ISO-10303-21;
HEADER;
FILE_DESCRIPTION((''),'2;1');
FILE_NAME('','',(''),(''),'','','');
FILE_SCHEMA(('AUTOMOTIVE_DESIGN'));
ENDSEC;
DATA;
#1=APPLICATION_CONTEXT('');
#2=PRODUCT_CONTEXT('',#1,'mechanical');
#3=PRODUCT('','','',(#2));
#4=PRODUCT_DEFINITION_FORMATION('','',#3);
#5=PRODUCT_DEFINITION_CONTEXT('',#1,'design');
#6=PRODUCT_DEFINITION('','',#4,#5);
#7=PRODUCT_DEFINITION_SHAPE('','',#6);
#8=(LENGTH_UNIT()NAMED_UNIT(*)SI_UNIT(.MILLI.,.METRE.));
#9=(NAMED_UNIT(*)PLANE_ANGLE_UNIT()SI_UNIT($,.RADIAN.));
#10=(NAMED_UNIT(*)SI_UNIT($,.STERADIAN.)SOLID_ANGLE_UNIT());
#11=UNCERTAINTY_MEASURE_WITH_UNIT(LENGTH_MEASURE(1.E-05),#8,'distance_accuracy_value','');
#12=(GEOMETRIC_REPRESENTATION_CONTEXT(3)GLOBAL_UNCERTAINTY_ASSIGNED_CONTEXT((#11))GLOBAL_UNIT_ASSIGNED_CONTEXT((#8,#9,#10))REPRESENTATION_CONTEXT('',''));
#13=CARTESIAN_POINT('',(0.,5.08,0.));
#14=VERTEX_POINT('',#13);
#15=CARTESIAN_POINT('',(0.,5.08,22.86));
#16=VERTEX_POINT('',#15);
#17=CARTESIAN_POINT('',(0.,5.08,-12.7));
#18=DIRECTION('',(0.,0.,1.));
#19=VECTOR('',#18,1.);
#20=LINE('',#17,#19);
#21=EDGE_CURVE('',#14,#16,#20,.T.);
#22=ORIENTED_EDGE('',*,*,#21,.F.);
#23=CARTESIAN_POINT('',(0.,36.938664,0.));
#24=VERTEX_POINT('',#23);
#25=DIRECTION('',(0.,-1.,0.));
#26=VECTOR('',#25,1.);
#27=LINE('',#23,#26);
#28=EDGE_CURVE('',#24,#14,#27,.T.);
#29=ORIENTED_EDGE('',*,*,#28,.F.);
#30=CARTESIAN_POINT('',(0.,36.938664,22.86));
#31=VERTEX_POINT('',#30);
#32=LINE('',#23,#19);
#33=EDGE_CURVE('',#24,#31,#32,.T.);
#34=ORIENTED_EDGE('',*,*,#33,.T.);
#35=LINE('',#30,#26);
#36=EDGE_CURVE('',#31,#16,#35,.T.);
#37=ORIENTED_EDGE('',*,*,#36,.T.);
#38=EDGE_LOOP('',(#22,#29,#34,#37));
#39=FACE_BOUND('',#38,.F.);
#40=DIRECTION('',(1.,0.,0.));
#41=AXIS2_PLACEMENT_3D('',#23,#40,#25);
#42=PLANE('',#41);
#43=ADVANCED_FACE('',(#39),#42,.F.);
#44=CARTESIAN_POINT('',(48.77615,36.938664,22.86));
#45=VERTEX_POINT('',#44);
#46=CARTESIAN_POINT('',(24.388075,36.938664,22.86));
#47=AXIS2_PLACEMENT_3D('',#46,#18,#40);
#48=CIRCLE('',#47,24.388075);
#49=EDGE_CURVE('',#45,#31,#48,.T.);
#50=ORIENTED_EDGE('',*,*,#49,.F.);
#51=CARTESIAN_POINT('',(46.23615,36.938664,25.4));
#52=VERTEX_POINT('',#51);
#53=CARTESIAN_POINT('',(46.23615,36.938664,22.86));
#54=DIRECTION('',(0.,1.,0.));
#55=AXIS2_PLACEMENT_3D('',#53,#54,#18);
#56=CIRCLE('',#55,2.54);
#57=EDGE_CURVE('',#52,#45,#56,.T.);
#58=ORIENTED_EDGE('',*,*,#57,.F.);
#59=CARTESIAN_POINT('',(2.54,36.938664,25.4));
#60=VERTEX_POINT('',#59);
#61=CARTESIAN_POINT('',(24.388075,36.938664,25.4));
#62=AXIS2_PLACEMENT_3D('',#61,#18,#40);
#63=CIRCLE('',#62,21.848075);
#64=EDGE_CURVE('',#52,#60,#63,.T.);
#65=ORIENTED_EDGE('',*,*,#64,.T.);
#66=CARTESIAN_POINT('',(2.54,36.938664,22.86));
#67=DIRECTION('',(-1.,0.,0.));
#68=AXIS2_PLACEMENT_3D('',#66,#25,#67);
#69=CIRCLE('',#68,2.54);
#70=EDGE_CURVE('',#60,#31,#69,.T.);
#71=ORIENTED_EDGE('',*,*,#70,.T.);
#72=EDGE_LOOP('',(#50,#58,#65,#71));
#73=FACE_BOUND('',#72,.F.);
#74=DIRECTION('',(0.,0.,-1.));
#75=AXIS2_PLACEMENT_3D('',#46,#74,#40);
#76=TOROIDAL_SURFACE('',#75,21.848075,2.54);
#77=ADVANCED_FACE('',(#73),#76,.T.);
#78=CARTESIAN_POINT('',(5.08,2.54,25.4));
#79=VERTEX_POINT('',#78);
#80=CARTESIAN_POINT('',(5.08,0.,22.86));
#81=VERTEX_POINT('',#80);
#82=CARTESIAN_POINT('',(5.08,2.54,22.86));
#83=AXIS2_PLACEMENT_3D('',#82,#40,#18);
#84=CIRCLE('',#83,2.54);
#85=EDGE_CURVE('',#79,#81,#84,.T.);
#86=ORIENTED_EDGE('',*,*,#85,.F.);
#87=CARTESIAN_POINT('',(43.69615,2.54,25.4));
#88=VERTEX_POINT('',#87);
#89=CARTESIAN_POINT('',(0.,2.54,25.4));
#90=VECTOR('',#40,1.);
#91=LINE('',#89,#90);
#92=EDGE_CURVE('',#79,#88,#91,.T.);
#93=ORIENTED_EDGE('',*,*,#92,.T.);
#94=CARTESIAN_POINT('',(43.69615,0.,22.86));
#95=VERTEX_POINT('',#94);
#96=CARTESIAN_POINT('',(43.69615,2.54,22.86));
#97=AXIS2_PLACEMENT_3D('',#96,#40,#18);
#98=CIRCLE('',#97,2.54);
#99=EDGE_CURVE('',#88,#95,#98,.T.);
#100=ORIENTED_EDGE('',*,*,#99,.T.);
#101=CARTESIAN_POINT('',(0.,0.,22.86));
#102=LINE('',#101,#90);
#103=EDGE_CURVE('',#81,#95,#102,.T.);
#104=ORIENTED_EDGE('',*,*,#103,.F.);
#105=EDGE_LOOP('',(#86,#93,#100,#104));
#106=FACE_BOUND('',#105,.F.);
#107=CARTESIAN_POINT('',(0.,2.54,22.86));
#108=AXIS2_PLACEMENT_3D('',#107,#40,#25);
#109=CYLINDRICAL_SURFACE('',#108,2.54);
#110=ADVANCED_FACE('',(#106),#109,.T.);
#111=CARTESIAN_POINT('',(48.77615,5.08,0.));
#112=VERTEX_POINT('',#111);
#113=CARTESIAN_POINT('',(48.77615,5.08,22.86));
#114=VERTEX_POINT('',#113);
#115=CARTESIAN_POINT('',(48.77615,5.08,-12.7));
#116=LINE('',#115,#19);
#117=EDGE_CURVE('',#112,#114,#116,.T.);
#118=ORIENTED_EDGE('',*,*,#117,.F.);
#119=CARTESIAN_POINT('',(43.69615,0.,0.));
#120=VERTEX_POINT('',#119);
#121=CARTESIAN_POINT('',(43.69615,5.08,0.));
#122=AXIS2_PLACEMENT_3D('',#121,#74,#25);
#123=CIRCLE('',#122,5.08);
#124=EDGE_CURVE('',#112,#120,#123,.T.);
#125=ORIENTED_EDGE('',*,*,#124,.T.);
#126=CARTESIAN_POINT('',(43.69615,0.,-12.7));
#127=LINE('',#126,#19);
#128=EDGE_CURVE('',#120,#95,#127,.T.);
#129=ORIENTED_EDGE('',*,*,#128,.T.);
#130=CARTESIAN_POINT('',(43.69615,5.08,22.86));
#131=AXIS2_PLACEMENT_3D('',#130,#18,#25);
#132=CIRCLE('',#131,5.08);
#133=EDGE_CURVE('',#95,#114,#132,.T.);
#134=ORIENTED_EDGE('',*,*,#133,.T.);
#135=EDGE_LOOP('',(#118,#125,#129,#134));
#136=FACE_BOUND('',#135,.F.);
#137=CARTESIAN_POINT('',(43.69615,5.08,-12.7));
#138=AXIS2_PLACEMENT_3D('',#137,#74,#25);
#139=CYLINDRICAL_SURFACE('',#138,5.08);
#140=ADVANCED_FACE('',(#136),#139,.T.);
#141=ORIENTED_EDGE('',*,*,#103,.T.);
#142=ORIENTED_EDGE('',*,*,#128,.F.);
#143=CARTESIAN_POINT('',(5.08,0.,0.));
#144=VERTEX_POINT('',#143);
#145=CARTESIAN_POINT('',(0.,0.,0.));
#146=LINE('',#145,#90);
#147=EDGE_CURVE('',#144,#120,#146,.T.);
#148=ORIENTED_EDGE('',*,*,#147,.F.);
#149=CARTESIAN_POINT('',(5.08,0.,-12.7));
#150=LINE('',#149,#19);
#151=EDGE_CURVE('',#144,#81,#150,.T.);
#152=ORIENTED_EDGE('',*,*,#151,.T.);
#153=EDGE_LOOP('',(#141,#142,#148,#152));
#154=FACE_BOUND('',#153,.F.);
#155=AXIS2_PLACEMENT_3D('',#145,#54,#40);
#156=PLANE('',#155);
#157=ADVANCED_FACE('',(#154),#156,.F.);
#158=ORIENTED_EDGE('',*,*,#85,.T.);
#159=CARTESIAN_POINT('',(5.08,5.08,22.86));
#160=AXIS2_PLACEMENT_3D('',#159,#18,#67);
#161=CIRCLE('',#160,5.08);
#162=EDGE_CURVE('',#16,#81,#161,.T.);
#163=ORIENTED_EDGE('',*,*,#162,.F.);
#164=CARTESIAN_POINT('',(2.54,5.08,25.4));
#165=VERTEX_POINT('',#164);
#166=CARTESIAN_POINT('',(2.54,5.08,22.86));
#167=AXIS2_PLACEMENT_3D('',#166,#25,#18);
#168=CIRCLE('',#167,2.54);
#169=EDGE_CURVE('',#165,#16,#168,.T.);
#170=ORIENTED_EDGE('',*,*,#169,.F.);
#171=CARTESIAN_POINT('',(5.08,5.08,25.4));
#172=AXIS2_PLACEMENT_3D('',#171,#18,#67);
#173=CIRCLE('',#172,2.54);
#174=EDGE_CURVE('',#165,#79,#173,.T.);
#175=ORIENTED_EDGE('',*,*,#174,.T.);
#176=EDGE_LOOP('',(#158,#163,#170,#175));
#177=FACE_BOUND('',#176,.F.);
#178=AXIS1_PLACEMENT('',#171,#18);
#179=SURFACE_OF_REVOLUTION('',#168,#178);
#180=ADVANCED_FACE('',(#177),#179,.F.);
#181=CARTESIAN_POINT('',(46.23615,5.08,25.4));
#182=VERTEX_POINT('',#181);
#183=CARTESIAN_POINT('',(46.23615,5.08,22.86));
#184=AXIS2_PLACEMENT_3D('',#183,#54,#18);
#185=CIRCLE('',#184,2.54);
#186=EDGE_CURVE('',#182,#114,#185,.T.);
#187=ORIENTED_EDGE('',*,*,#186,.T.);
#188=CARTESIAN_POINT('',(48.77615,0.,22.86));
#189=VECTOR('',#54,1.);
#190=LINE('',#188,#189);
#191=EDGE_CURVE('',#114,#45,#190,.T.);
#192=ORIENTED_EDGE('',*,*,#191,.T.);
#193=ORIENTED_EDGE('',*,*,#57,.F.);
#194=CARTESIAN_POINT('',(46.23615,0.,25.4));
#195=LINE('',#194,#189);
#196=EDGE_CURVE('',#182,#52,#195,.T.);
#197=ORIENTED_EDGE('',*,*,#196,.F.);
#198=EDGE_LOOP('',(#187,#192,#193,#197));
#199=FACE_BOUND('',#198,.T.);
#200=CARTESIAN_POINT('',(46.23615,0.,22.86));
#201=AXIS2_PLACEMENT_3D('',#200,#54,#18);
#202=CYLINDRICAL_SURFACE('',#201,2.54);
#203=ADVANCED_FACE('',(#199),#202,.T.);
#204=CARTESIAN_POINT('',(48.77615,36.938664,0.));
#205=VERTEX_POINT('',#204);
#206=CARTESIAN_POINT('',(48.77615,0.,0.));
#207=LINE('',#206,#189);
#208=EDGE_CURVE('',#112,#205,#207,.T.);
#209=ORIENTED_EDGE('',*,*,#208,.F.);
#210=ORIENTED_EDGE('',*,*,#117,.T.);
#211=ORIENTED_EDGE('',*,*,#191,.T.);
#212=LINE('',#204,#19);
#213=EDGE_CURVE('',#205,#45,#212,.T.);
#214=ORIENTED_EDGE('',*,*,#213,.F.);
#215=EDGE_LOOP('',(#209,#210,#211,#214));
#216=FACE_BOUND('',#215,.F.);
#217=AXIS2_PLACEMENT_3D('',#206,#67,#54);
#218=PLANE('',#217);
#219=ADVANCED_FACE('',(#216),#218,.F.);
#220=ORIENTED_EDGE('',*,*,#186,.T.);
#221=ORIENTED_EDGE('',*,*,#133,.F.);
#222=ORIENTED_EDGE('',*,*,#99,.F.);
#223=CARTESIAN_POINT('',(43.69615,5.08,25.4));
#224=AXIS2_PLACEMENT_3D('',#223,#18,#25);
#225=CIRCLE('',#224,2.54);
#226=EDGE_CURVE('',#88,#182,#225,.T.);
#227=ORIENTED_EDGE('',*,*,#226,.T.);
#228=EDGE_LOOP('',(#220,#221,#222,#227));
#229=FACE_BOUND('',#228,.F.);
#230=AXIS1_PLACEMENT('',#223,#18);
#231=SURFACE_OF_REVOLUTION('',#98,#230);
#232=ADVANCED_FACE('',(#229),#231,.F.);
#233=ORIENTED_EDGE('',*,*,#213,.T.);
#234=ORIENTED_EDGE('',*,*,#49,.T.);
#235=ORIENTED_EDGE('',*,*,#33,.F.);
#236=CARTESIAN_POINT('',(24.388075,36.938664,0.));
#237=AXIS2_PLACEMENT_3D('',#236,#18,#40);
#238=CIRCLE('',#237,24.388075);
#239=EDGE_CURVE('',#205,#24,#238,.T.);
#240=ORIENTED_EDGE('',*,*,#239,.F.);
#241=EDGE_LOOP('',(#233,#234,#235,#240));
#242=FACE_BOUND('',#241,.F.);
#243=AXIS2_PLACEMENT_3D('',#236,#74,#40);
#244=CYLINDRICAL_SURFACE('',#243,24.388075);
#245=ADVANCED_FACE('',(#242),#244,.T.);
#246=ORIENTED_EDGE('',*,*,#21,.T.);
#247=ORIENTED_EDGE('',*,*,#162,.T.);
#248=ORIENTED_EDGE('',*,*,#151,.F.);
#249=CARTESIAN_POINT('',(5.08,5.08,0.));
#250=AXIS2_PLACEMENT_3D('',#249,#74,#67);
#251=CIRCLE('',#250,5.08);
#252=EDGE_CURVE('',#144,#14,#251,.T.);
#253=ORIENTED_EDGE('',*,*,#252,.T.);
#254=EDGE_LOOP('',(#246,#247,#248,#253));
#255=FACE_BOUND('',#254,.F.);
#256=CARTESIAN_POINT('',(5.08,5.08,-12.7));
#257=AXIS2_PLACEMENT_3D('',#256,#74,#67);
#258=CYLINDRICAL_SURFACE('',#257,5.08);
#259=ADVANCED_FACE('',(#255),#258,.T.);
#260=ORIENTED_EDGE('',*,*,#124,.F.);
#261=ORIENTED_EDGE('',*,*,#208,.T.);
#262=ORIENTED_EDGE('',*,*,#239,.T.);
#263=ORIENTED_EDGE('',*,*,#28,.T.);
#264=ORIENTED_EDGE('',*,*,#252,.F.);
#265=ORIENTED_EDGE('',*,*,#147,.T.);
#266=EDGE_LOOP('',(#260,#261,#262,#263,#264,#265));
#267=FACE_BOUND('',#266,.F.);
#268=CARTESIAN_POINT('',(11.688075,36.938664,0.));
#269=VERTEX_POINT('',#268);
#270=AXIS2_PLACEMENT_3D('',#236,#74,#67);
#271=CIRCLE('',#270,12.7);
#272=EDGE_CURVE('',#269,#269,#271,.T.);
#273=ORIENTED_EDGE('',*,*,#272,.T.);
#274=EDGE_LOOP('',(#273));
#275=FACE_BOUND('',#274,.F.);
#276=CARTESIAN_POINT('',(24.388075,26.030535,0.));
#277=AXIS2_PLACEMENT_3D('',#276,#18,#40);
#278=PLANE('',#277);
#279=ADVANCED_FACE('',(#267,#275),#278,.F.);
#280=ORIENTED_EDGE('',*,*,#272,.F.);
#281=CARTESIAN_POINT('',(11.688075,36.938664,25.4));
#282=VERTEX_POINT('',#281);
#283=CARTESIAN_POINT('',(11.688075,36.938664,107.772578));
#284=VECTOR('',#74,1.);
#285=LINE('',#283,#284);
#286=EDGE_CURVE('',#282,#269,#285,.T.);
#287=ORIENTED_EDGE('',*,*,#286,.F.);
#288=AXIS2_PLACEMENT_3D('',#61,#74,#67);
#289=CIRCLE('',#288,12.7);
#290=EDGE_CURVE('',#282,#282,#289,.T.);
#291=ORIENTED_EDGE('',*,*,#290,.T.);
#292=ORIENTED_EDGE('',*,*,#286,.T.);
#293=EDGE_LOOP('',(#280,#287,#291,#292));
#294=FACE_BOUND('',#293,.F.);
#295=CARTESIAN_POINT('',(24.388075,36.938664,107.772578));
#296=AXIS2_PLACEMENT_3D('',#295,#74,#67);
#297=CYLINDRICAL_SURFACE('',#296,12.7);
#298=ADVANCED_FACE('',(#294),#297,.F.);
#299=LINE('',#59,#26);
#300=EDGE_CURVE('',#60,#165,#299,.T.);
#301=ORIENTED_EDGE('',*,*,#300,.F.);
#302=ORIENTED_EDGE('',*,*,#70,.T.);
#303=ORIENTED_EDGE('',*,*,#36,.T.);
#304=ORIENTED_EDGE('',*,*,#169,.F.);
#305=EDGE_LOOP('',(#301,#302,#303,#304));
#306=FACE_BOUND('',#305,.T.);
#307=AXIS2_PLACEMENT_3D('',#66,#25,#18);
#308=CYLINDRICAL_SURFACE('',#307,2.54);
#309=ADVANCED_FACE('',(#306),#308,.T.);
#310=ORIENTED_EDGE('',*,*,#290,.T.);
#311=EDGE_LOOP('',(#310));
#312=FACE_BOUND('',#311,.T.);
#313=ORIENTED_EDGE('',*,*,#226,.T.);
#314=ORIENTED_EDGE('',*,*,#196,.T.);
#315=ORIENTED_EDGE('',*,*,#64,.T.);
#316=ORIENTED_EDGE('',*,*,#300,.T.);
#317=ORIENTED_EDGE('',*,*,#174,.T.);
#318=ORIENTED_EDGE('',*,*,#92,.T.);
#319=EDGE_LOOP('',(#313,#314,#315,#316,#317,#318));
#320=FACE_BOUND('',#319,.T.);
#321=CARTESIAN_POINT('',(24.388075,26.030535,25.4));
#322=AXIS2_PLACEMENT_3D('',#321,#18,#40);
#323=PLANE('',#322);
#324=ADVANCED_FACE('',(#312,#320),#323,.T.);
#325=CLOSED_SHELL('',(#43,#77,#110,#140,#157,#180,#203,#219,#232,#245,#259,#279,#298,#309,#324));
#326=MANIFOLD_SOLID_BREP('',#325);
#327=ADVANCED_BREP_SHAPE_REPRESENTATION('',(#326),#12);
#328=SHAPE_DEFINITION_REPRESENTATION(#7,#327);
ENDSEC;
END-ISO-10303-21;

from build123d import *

# Parameters (mm, degrees)
F1_DEPTH    = 25.4
F3_D        = 25.4
F4_R        = 2.54
F5_T1_DEPTH = 38.1
F5_T4_ANGLE = 90
F5_T6_ANGLE = 90


# Not quite as in the source:
# - a fillet or chamfer that OpenCascade refuses, or shapes differently, is made with other operations: its cross-section is extruded or revolved along the edge and cut away or added


with BuildPart() as f1:
    # F0 (on Top) → F1 (new body)
    with BuildSketch(Plane.XY):
        with BuildLine():
            Line((0, 36.9386635721), (0, 0))
            Line((0, 0), (48.7761497498, 0))
            Line((48.7761497498, 0), (48.7761497498, 36.9386635721))
            ThreePointArc((48.7761497498, 36.9386635721), (24.3880748749, 61.326738447), (0, 36.9386635721))
        make_face()
    extrude(amount=F1_DEPTH)

    # F3 (through all)
    with Locations(Plane.XY.offset(25.4)):
        with Locations((24.3880748749, 36.9386635721)):
            Hole(F3_D / 2)

    # F4
    f4_edges = [f1.edges().sort_by_distance(p)[0] for p in [
        (24.388075, 0, 25.4),
        (48.77615, 18.469332, 25.4),
    ]]
    fillet(f4_edges, radius=F4_R)

    # F5: fillet of radius 5.08 on 2 edges, made by hand

    # F5_s2 → F5_t1 (cut)
    with BuildSketch(Plane.XY.offset(-12.7)):
        with BuildLine():
            ThreePointArc((43.6961497498, 0), (47.2882521982, 1.4878975516), (48.7761497498, 5.08))
            Line((48.7761497498, 5.08), (48.7761497498, 0))
            Line((48.7761497498, 0), (43.6961497498, 0))
        make_face()
        with BuildLine():
            ThreePointArc((0, 5.08), (1.4878975516, 1.4878975516), (5.08, 0))
            Line((5.08, 0), (0, 0))
            Line((0, 0), (0, 5.08))
        make_face()
    extrude(amount=F5_T1_DEPTH, mode=Mode.SUBTRACT)

    # F5_s3 → F5_t4 (revolve, cut)
    with BuildSketch(Plane.XZ.offset(-5.08)):
        with BuildLine():
            ThreePointArc((2.54, 25.4), (0.7439487758, 24.6560512242), (0, 22.86))
            Line((0, 22.86), (0, 25.4))
            Line((0, 25.4), (2.54, 25.4))
        make_face()
    revolve(axis=Axis((5.08, 5.08, 25.4), (0, 0, 1)), revolution_arc=F5_T4_ANGLE, mode=Mode.SUBTRACT)

    # F5_s5 → F5_t6 (revolve, cut)
    with BuildSketch(Plane.YZ.offset(43.6961497498)):
        with BuildLine():
            ThreePointArc((2.54, 25.4), (0.7439487758, 24.6560512242), (0, 22.86))
            Line((0, 22.86), (0, 25.4))
            Line((0, 25.4), (2.54, 25.4))
        make_face()
    revolve(axis=Axis((43.6961497498, 5.08, 25.4), (0, 0, 1)), revolution_arc=F5_T6_ANGLE, mode=Mode.SUBTRACT)


solid = f1.part
